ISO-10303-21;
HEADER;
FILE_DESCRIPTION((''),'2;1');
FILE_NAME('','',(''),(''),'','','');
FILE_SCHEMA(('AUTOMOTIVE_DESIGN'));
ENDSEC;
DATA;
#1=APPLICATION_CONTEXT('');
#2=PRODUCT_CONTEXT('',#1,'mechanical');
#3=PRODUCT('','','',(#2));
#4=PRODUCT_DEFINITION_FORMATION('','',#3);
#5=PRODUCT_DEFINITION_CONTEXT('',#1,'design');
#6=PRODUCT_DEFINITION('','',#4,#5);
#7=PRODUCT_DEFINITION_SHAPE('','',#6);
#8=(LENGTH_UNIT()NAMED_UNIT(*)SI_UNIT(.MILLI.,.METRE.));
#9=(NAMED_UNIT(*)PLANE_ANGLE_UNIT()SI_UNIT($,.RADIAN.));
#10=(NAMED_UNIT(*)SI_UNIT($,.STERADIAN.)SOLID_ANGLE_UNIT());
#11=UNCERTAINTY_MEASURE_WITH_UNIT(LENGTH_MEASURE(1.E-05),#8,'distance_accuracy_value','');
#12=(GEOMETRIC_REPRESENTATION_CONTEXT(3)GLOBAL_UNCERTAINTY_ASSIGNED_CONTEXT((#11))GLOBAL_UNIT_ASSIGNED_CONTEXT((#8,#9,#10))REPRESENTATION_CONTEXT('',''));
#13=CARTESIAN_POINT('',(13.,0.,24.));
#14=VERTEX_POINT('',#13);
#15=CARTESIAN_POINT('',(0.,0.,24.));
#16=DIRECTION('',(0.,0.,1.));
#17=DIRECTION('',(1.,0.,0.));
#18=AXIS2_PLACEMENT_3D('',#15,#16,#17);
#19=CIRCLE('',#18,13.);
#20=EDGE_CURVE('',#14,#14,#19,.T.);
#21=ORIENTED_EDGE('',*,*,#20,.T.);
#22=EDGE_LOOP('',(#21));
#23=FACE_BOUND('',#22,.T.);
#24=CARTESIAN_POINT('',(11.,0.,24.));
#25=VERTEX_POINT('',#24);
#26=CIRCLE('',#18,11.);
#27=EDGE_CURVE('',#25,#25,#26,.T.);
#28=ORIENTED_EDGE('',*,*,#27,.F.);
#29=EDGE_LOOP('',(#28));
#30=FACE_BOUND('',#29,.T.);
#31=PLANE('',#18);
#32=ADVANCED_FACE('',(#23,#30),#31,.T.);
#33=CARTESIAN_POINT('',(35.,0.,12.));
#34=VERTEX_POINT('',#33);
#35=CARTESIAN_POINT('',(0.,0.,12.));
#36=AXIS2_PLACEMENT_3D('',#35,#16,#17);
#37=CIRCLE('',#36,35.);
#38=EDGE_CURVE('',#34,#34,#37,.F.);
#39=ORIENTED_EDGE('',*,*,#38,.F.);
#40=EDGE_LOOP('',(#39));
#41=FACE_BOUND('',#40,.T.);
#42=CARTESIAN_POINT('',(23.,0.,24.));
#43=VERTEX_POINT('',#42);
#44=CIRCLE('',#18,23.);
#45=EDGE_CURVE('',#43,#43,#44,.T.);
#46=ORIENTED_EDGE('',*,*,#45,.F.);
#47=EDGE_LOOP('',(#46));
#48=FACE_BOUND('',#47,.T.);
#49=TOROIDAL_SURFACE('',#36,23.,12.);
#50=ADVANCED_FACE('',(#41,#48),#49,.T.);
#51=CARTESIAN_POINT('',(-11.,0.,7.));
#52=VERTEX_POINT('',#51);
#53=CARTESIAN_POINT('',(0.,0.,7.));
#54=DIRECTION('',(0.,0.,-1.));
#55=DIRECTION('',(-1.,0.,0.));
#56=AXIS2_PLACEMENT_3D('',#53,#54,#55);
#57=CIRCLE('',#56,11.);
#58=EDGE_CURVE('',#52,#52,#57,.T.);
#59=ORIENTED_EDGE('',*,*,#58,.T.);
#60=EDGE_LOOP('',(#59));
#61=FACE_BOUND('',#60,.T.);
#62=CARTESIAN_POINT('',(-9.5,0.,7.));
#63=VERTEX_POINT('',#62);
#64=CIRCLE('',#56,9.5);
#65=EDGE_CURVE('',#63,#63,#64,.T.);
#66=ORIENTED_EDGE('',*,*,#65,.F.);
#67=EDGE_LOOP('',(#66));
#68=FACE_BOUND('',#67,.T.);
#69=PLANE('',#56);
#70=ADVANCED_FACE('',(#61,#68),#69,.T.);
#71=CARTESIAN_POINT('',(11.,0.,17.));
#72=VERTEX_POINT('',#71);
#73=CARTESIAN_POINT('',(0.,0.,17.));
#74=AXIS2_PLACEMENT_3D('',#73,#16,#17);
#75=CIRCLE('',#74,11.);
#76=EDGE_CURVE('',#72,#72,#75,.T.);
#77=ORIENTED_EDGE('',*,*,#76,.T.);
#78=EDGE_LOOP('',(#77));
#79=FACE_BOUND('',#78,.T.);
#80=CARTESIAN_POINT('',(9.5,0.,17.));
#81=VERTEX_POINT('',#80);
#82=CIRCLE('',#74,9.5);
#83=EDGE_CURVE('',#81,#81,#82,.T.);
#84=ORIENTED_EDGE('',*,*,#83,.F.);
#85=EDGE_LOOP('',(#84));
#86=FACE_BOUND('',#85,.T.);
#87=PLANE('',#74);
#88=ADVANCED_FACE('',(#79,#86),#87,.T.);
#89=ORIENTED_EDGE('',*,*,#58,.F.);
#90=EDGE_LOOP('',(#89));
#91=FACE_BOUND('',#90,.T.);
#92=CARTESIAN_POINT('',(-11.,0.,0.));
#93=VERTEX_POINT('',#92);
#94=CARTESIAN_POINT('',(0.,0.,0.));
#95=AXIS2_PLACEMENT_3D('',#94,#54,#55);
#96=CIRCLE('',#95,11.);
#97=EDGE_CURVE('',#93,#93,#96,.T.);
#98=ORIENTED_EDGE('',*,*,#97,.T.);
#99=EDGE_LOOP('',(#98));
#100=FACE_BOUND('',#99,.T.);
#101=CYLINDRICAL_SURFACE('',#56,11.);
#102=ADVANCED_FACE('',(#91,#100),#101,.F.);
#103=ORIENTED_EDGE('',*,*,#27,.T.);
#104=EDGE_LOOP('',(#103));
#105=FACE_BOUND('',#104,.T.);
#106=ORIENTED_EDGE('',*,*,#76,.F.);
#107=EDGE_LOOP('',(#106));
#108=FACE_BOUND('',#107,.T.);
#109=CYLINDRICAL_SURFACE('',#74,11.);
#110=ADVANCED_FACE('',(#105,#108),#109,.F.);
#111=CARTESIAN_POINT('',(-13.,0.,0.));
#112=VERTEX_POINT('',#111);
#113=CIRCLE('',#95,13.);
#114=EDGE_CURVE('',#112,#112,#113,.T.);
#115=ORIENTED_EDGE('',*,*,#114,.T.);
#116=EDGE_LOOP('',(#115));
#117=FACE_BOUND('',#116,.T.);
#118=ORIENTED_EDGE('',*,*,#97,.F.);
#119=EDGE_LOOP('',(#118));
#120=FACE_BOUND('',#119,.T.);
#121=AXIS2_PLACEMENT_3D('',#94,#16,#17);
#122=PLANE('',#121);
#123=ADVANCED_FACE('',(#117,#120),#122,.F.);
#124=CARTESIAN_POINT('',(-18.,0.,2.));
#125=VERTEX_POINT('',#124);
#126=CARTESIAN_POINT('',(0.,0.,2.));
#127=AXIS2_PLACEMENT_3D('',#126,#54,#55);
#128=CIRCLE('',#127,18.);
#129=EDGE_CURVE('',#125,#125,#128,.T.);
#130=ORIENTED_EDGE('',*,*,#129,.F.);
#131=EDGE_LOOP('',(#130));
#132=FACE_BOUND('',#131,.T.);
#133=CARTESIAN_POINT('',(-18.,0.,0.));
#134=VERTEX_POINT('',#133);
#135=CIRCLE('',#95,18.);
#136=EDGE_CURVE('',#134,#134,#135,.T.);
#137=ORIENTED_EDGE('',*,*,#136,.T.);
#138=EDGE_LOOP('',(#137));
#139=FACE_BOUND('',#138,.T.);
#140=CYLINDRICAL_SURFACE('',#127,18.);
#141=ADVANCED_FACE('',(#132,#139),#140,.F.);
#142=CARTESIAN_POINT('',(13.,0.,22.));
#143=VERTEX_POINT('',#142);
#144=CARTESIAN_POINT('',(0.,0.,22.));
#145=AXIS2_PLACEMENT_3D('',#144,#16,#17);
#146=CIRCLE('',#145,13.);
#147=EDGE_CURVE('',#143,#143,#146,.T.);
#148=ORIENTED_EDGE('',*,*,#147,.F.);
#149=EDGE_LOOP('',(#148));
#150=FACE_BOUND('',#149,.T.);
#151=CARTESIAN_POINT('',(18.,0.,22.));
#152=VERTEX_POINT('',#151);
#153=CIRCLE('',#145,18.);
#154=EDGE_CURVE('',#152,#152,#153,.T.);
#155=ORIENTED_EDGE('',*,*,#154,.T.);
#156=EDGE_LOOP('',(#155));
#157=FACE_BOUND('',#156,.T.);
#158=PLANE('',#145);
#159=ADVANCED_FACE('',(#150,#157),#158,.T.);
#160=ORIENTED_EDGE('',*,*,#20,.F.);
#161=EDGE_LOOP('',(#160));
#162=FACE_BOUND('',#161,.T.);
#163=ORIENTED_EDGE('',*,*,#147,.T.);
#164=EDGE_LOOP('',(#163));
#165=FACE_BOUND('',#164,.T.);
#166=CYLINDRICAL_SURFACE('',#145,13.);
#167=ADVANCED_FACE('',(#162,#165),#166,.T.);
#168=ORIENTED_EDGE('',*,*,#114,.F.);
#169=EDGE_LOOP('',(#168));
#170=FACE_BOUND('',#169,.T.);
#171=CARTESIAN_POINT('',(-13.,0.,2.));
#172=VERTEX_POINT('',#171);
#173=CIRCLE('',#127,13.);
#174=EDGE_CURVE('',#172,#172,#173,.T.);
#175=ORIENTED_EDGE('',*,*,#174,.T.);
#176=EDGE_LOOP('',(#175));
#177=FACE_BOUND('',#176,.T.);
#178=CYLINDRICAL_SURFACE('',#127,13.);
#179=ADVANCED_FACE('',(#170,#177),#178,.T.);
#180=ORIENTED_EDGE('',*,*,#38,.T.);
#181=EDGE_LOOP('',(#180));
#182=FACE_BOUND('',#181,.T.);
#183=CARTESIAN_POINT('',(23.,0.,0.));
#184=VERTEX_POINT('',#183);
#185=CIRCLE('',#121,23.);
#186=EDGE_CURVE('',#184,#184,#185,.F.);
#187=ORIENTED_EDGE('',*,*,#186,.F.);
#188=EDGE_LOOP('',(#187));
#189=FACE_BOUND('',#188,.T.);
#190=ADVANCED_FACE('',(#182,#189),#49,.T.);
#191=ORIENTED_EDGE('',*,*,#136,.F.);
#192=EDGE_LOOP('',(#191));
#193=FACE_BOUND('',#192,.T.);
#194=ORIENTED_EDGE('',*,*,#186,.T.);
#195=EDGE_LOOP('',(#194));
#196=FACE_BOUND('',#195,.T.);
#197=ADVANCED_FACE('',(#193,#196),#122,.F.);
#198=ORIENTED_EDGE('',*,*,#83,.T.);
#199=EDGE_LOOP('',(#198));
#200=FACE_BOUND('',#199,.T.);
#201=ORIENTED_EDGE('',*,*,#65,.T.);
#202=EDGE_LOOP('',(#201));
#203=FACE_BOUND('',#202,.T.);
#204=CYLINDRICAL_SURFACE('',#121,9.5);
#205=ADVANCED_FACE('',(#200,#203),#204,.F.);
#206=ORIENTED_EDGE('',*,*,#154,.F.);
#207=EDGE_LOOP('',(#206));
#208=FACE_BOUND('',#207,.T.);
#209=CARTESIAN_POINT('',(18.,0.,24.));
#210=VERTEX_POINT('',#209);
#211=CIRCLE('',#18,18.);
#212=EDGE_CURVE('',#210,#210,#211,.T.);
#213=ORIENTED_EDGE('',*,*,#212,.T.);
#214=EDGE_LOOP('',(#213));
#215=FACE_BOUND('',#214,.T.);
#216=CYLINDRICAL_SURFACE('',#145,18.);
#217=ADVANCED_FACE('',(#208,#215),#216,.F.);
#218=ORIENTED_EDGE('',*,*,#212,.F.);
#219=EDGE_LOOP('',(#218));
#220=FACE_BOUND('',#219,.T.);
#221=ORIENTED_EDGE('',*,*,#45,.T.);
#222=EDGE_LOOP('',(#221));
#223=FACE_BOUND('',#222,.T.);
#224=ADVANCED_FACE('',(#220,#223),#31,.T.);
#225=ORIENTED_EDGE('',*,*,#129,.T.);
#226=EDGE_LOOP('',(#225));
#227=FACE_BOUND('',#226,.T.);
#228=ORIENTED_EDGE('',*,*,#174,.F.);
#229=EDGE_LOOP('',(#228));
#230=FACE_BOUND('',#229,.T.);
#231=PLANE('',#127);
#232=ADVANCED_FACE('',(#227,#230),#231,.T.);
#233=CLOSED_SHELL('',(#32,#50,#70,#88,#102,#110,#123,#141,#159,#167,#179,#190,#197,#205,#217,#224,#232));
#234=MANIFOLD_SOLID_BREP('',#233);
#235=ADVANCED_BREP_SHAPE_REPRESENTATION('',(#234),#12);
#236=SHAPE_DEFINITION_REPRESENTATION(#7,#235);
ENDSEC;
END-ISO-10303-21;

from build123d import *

# Parameters (mm, degrees)
ESQUISSE1_R             = 35
EXTRUSION1_DEPTH        = 24
CONG_1_R                = 12
CONG_2_R                = 12
ESQUISSE2_R             = 11
ENL_V_MAT_EXTRU_1_DEPTH = 7
ENL_V_START             = -7
ESQUISSE3_R             = 11
ENL_V_MAT_EXTRU_2_DEPTH = 7
ESQUISSE5_R             = 9.5
ENL_V_MAT_EXTRU_3_DEPTH = 53.335456499
ESQUISSE8_R             = 18
ESQUISSE8_R_2           = 13
ENL_V_MAT_EXTRU_4_DEPTH = 2
ENL_V_START_2           = -2
ESQUISSE9_R             = 18
ESQUISSE9_R_2           = 13
ENL_V_MAT_EXTRU_5_DEPTH = 2


with BuildPart() as part:
    # Esquisse1 → Extrusion1 (new body)
    with BuildSketch(Plane.XY):
        Circle(ESQUISSE1_R)
    extrude(amount=EXTRUSION1_DEPTH)

    # Congé1
    cong_1_edges = [part.edges().sort_by_distance(p)[0] for p in [
        (-35, 0, 24),
    ]]
    fillet(cong_1_edges, radius=CONG_1_R)

    # Congé2
    cong_2_edges = [part.edges().sort_by_distance(p)[0] for p in [
        (-35, 0, 0),
    ]]
    fillet(cong_2_edges, radius=CONG_2_R - 0.0001)  # a hair under: the kernel refuses the full size

    # Esquisse2 → Enlèv. mat.-Extru.1 (cut)
    with BuildSketch(Plane.XY.offset(24)):
        Circle(ESQUISSE2_R)
    extrude(amount=-ENL_V_MAT_EXTRU_1_DEPTH, mode=Mode.SUBTRACT)

    # Esquisse3 → Enlèv. mat.-Extru.2 (cut)
    with BuildSketch(Plane(origin=(0, 0, 0), x_dir=(-1, 0, 0), z_dir=(0, 0, -1)).offset(ENL_V_START)):
        with Locations(Location((0, 0, 0), (0, 0, 180))):
            Circle(ESQUISSE3_R)
    extrude(amount=ENL_V_MAT_EXTRU_2_DEPTH, mode=Mode.SUBTRACT)

    # Esquisse5 → Enlèv. mat.-Extru.3 (cut, through all)
    with BuildSketch(Plane.XY.offset(17)):
        Circle(ESQUISSE5_R)
    extrude(amount=-ENL_V_MAT_EXTRU_3_DEPTH, mode=Mode.SUBTRACT)

    # Esquisse8 → Enlèv. mat.-Extru.4 (cut)
    with BuildSketch(Plane(origin=(0, 0, 0), x_dir=(-1, 0, 0), z_dir=(0, 0, -1))):
        Circle(ESQUISSE8_R)
        Circle(ESQUISSE8_R_2, mode=Mode.SUBTRACT)
    extrude(amount=-ENL_V_MAT_EXTRU_4_DEPTH, mode=Mode.SUBTRACT)

    # Esquisse9 → Enlèv. mat.-Extru.5 (cut)
    with BuildSketch(Plane.XY.offset(24).offset(ENL_V_START_2)):
        with Locations(Location((0, 0, 0), (0, 0, 180))):
            Circle(ESQUISSE9_R)
        with Locations(Location((0, 0, 0), (0, 0, 180))):
            Circle(ESQUISSE9_R_2, mode=Mode.SUBTRACT)
    extrude(amount=ENL_V_MAT_EXTRU_5_DEPTH, mode=Mode.SUBTRACT)


solid = part.part
